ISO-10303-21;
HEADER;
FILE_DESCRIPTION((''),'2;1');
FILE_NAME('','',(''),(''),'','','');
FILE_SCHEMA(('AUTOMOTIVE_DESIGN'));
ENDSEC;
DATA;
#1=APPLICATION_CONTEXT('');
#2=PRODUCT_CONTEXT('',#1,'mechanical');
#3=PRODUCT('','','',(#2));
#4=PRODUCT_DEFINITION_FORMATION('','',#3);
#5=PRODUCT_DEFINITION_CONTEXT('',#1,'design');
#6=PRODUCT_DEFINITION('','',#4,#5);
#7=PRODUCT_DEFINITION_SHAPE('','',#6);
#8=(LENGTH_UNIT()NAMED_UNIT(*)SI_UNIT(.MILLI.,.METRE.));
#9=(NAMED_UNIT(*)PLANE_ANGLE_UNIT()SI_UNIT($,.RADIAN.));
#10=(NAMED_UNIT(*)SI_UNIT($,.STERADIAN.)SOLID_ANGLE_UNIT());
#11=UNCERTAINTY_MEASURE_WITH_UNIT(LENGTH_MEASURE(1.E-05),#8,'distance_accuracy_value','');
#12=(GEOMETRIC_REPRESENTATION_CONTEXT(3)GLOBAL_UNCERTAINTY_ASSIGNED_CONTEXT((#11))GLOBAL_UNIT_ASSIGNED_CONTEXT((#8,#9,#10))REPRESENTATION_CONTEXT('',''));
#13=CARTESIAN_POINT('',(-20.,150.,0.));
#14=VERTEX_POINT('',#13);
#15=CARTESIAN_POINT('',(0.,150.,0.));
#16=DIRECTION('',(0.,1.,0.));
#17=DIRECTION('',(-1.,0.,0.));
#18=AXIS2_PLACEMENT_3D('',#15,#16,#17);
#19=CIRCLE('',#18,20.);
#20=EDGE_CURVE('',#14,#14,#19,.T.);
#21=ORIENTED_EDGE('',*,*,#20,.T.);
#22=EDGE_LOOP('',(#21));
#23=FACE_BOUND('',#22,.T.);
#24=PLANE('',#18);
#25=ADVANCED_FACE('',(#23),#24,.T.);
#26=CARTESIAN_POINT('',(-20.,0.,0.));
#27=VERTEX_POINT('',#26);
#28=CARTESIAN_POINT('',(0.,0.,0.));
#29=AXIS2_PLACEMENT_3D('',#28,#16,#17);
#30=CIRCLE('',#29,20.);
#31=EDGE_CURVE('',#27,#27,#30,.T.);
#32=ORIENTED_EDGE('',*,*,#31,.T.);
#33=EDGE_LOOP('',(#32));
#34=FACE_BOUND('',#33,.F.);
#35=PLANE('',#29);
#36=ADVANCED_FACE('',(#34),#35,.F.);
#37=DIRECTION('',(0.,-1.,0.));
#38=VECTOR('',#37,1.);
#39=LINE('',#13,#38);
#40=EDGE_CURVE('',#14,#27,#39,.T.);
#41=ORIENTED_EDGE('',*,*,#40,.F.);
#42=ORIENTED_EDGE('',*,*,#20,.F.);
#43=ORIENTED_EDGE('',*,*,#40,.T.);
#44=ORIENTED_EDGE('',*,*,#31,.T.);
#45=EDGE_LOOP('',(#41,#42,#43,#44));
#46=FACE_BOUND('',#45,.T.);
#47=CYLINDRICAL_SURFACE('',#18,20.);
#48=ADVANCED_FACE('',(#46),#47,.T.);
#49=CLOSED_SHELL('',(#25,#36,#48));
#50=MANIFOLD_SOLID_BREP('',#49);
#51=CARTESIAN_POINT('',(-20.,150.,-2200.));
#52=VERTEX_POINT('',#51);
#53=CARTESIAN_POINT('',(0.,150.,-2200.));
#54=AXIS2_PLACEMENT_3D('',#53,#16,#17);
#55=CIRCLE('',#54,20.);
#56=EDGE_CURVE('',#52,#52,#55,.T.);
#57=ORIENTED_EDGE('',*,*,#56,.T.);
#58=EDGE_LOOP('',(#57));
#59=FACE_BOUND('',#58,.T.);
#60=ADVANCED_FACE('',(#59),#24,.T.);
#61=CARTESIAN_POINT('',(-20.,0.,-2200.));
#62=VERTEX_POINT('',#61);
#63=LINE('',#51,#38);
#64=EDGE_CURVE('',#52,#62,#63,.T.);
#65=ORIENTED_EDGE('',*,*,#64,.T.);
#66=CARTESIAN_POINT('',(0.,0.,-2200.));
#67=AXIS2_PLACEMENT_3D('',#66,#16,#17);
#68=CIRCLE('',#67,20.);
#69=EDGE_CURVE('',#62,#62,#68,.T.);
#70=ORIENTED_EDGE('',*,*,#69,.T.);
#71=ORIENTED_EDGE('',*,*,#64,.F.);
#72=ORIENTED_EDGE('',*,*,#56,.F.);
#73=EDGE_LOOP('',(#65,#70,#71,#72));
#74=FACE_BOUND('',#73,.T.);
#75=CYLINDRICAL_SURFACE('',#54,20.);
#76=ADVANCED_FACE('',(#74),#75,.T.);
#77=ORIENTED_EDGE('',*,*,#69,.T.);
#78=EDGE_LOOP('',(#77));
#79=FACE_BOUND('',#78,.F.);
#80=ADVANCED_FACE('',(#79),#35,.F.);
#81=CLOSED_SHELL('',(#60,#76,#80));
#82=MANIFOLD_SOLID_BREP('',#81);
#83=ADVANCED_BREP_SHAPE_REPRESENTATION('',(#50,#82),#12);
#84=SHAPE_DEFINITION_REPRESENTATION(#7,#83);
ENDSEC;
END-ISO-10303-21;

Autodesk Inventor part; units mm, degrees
ref_plane "YZ Plane" through (0, 0, 0) normal (1, 0, 0) x (0, 1, 0)
ref_plane "XY Plane" through (0, 0, 0) normal (0, 0, 1) x (1, 0, 0)
sketch "Sketch1" plane through (0, 0, 0) normal (0, 1, 0) x (-1, 0, 0)
  line L0 (0, 0) -> (0, -2200) construction
  line L1 (-100, 0) -> (-100, -2200)
  line L2 (100, -2200) -> (100, 0)
  arc A0 (100, 0) -> (-100, 0) centre (0, 0) ccw
  arc A1 (-100, -2200) -> (100, -2200) centre (0, -2200) ccw
  circle A2 centre (0, 0) radius 20
  circle A3 centre (0, -2200) radius 20
  point P0 (0, -1100)
  dimension "d0" = 2200
  dimension "d1" = 100
  dimension "d2" = 40
  dimension "d3" = 40
ref_plane "Work Plane1" through (0, 150, 0) normal (0, 1, 0) x (-1, 0, 0)
sketch "Sketch2" plane through (0, 150, 0) normal (0, 1, 0) x (-1, 0, 0)
  line L0 (100, -2200) -> (100, 0) projected
  arc A0 (-100, -2200) -> (100, -2200) centre (0, -2200) ccw projected
  circle A1 centre (0, -2200) radius 20 projected
  line L1 (-100, 0) -> (-100, -2200) projected
  circle A2 centre (0, 0) radius 20 projected
  arc A3 (100, 0) -> (-100, 0) centre (0, 0) ccw projected
extrude "Extrusion1" add sketch "Sketch2" against normal up to surface (150 mm away) contours A1 | A2
properties part number "arm j1 subassembly"
